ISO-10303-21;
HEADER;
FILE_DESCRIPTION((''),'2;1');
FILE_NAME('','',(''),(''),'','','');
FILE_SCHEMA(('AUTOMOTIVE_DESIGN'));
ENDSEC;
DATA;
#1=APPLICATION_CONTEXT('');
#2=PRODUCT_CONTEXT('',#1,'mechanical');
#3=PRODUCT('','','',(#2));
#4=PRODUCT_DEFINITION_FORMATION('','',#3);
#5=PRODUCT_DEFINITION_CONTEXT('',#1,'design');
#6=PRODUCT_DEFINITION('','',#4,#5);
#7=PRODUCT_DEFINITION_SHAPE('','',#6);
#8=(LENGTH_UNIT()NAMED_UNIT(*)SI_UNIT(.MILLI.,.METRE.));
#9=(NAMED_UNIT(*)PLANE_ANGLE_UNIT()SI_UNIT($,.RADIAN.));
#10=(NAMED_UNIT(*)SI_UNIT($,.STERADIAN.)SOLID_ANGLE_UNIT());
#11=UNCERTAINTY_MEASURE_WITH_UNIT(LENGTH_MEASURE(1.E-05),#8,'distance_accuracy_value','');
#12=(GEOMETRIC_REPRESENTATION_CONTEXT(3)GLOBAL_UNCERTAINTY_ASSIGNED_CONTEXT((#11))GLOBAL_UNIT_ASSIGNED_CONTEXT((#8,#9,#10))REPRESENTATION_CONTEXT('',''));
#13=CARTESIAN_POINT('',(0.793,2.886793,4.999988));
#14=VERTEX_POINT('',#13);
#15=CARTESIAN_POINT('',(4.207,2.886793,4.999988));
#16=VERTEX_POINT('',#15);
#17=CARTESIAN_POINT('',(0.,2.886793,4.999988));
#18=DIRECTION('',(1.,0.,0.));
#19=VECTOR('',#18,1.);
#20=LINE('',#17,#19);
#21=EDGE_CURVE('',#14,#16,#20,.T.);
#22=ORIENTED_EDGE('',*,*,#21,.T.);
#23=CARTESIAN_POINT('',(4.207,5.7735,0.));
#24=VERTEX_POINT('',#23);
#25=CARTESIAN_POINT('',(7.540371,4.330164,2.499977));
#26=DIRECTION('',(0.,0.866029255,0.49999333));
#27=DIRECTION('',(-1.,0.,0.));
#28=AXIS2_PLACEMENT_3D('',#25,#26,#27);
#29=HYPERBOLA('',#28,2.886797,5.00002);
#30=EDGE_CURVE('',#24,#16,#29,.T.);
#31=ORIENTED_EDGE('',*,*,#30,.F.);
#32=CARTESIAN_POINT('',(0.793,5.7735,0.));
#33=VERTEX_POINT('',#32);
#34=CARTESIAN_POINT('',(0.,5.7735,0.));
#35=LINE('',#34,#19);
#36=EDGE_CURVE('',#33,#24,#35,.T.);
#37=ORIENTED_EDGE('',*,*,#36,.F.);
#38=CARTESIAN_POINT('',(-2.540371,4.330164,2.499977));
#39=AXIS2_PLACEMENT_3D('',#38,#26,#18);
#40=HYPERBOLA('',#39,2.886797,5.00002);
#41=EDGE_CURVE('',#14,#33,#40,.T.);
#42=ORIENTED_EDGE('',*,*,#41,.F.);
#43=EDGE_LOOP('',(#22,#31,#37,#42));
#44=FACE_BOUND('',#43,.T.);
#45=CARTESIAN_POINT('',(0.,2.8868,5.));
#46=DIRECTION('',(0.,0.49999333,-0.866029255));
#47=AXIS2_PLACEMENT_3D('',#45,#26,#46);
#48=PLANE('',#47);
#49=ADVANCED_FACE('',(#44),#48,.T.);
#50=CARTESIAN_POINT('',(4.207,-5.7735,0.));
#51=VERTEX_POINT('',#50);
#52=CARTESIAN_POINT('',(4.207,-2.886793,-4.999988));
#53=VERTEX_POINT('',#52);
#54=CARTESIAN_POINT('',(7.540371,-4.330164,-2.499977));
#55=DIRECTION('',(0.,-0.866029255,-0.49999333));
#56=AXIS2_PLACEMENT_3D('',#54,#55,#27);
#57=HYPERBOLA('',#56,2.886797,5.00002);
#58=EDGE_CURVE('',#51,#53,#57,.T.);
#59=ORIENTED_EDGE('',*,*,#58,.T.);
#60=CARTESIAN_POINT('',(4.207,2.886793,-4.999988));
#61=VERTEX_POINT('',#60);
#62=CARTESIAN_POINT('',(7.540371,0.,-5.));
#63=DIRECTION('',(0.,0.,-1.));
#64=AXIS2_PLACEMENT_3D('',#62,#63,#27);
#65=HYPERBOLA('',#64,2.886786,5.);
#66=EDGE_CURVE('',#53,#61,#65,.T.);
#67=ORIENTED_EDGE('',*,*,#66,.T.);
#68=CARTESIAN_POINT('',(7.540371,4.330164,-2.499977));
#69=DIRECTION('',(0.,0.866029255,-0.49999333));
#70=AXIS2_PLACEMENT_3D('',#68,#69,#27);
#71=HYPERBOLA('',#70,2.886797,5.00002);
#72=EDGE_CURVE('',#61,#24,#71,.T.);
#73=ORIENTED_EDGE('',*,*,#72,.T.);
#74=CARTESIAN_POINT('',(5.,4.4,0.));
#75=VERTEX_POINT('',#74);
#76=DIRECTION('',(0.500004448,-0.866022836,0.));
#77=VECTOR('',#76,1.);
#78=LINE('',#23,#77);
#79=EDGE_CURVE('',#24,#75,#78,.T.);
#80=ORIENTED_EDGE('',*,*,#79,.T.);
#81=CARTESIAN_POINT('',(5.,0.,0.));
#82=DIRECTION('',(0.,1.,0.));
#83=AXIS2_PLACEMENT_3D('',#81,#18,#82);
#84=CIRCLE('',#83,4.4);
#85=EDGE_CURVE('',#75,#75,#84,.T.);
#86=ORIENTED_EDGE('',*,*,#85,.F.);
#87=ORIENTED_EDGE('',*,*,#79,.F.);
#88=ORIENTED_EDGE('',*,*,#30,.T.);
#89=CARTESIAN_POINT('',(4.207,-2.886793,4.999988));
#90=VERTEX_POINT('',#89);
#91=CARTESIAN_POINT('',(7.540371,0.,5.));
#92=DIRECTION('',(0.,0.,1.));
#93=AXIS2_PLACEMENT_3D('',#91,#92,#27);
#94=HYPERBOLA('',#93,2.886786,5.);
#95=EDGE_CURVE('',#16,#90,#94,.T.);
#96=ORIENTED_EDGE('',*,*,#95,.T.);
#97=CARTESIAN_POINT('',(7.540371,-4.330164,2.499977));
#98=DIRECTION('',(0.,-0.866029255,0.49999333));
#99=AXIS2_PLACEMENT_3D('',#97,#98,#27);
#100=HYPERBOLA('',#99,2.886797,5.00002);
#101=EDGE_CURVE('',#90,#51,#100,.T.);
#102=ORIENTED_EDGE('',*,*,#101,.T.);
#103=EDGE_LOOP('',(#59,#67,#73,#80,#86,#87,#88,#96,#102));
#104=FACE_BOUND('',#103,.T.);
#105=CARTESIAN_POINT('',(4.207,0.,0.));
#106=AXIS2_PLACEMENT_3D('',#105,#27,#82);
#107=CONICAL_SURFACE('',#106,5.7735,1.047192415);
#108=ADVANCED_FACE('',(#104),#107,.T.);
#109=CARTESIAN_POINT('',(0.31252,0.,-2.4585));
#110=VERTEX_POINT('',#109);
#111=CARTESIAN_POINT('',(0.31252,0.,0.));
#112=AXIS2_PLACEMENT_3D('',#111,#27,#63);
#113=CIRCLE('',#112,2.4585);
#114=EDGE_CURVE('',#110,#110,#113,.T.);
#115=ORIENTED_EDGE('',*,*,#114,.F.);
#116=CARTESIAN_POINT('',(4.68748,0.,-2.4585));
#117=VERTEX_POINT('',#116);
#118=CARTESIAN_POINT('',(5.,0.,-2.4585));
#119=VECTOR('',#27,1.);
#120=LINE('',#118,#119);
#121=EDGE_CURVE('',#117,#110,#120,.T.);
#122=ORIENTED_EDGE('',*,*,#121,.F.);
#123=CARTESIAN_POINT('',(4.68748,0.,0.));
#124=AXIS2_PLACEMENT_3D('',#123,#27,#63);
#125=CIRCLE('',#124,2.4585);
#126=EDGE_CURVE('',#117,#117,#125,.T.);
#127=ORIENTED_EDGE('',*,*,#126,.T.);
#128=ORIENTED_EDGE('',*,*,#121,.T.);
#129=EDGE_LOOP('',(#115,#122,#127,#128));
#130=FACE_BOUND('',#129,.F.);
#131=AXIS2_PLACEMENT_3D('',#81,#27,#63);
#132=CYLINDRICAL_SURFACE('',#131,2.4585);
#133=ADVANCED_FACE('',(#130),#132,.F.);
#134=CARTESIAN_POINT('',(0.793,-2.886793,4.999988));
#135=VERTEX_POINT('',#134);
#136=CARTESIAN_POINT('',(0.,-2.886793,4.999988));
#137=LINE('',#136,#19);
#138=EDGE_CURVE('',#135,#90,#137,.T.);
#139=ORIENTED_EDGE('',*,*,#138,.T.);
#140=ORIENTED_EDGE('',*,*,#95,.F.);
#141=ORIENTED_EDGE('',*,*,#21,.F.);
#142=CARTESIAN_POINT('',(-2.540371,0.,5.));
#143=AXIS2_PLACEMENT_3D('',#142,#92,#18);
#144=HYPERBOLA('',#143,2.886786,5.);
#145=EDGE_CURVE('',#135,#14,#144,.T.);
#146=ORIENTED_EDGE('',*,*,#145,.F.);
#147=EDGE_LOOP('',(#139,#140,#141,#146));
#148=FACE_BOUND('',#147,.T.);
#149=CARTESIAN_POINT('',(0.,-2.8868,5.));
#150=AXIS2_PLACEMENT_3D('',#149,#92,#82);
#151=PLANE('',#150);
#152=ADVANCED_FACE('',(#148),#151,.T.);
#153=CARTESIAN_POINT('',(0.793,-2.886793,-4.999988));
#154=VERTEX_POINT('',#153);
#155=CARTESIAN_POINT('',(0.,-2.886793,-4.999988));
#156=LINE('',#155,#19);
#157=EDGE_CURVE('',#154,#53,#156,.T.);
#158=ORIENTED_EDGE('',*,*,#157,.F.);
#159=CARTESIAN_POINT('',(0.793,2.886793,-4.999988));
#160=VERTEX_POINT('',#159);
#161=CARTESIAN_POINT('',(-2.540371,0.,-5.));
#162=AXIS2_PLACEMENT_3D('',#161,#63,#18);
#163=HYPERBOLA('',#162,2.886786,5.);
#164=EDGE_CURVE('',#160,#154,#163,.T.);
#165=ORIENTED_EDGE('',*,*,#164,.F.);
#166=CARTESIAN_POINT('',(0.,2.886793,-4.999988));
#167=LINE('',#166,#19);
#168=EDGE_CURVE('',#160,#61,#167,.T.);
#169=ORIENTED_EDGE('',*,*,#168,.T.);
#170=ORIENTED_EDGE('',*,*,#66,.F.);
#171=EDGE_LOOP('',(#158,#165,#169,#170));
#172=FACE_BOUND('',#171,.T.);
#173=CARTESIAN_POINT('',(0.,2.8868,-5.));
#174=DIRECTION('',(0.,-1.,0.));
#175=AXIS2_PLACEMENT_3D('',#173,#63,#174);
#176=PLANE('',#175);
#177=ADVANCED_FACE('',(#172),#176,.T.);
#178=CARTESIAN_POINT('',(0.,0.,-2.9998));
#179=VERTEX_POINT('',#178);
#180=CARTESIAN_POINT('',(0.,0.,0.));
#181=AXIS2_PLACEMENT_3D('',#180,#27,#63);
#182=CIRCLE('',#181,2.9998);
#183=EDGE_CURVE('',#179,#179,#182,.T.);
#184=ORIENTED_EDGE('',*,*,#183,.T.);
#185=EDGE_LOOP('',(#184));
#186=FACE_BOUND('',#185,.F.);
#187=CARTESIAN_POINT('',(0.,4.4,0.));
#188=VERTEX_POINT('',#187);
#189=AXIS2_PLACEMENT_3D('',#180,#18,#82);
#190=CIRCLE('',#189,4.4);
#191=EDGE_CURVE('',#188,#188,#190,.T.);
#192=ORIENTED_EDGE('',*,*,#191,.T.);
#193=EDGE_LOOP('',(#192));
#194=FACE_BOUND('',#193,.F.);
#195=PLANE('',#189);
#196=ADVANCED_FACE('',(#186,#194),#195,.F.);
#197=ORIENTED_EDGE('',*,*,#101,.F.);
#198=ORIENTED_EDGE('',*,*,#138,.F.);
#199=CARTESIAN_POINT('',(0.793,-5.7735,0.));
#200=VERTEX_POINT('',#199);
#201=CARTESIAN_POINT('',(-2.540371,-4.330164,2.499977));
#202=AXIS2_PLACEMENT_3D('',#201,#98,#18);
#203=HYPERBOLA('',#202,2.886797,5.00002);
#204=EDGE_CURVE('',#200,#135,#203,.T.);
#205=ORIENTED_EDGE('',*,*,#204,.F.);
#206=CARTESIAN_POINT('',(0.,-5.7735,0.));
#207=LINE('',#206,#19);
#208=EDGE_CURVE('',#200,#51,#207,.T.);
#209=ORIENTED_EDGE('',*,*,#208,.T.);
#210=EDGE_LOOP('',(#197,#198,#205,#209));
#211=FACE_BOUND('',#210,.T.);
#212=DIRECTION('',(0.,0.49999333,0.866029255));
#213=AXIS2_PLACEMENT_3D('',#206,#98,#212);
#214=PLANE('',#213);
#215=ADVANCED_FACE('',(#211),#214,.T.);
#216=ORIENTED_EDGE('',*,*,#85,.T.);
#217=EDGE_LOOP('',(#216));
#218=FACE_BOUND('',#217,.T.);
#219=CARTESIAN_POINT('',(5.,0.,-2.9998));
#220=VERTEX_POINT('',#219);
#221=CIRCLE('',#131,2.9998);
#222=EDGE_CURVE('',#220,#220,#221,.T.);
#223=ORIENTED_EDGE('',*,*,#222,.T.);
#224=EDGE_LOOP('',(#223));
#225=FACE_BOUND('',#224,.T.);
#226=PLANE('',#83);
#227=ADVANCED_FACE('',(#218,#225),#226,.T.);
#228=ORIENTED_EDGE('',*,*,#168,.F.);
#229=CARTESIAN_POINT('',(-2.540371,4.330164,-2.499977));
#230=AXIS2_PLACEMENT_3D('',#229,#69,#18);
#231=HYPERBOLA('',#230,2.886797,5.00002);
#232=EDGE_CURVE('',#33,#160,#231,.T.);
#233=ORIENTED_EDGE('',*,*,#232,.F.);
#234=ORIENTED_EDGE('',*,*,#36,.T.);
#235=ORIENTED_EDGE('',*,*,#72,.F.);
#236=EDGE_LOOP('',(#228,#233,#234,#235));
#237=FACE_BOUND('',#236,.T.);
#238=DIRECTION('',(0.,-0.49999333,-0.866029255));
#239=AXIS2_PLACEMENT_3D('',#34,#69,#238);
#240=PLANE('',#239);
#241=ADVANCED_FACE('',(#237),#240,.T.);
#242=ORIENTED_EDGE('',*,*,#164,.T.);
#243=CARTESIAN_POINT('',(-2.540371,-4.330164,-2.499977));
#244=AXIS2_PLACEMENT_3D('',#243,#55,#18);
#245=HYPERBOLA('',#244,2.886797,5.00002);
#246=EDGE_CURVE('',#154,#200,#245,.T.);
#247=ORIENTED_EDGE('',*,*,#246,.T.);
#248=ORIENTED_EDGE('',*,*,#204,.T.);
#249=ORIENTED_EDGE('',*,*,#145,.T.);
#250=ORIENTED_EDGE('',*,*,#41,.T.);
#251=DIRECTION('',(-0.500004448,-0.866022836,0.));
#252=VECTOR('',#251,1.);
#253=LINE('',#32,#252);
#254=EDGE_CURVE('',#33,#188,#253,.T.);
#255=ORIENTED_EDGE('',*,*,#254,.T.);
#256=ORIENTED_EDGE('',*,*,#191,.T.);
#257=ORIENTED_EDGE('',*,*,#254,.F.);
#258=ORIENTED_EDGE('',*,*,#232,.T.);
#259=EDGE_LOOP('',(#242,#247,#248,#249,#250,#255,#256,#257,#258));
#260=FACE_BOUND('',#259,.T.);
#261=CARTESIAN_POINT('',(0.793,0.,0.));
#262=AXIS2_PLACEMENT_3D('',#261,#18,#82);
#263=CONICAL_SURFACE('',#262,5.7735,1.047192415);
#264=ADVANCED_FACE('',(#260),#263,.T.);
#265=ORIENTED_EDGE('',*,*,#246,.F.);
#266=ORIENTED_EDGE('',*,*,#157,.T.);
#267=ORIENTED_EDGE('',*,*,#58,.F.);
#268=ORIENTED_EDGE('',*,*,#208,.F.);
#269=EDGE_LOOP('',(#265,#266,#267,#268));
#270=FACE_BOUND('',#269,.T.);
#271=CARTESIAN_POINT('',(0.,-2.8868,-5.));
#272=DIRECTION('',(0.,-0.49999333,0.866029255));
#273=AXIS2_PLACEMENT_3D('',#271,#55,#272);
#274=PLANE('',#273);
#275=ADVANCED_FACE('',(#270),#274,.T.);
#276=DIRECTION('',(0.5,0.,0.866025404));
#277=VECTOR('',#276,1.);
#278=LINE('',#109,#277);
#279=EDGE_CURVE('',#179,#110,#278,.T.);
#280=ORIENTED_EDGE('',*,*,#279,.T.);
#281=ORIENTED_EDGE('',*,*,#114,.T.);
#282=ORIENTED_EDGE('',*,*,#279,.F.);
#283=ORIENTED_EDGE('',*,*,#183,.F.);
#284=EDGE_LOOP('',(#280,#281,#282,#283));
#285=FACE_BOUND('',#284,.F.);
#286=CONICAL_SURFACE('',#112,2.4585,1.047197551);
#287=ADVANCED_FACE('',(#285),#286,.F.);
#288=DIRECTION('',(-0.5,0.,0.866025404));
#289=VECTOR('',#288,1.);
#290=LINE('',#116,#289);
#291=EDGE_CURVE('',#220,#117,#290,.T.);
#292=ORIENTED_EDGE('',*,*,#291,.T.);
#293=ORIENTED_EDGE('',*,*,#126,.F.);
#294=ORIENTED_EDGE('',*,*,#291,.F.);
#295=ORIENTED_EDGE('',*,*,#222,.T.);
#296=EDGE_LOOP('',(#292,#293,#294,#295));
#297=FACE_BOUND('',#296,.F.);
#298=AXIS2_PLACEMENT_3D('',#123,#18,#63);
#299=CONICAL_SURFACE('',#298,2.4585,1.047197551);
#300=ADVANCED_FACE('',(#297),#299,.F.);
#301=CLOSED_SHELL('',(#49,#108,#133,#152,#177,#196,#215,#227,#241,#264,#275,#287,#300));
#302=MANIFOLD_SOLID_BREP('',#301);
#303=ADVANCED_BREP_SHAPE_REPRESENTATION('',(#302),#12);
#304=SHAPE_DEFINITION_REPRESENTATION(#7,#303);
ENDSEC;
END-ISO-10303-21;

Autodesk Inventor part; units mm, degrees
ref_plane "YZ Plane" through (0, 0, 0) normal (1, 0, 0) x (0, 1, 0)
ref_plane "XZ Plane" through (0, 0, 0) normal (0, 1, 0) x (-1, 0, 0)
sketch "Sketch1" plane through (0, 0, 0) normal (1, 0, 0) x (0, 1, 0)
  line L0 (-5.7735, 0) -> (-2.8868, 5)
  line L1 (-2.8868, 5) -> (2.8868, 5)
  line L2 (2.8868, 5) -> (5.7735, 0)
  line L3 (5.7735, 0) -> (2.8868, -5)
  line L4 (2.8868, -5) -> (-2.8868, -5)
  line L5 (-2.8868, -5) -> (-5.7735, 0)
  point P0 (0, 0)
  point P1 (0, 0)
  dimension "d0" = 11.547
extrude "Body" add sketch "Sketch1" along normal blind 5
sketch "Sketch2" plane through (0, 0, 0) normal (0, 0, 1) x (1, 0, 0)
  line L0 (0, 2.8868) -> (0, 5.7735) projected
  line L1 (0, 5.7735) -> (5, 5.7735) projected
  line L2 (5, 2.8868) -> (5, 5.7735) projected
  line L3 (-1, 0) -> (6, 0) projected
  line L4 (0.793, 5.7735) -> (0, 4.4)
  line L5 (4.207, 5.7735) -> (5, 4.4)
  dimension "d3" = 30
  dimension "d4" = 30
  dimension "d5" = 8.8
  dimension "d6" = 8.8
revolve "Chamfer1" cut sketch "Sketch2" angle 360 about axis through (-10, 0, 0) along (1, 0, 0)
sketch "Sketch3" plane through (5, 0, 0) normal (1, 0, 0) x (0, 0, -1)
  arc A0 (-0.625, -1.0825) -> (0.625, -1.0825) centre (0, 0) ccw projected
hole "Thread" at (5, 0, 0) direction (-1, 0, 0) diameter 4.917 end through all thread size "M6x1" class "6H" standard "ISO Metric profile"
chamfer "Chamfer2" distance 0.5413 angle 30 1 edges at (5, 0, 2.4585) measured on face at (5, 3.7042, -0.4498)
chamfer "Chamfer3" distance 0.5413 angle 30 1 edges at (0, 0, 2.4585) measured on face at (0, 3.7042, -0.4498)
ref_plane "Work Plane1" through (-11.098, 0, 0) normal (0, -0.8660254, -0.5) x (1, 0, 0)
equation "\"d0\" = 1.1547 * SW"
equation "\"d1\" = KOH"
equation "\"d3\" = ANG1"
equation "\"d4\" = ANG2"
equation "\"d5\" = SW0"
equation "\"d6\" = SW01"
equation "\"d8\" = -0.5 * GD1 + 0.5 * NND"
equation "\"d40\" = -0.5 * GD1 + 0.5 * NND"
equation "\"d10\" = -0.5 * GD1 + 0.5 * NND"
equation "\"d41\" = -0.5 * GD1 + 0.5 * NND"
equation "\"ANG1\" = 30deg"
equation "\"ANG2\" = 30deg"
equation "\"NND\" = 6"
equation "\"KOH\" = 5"
equation "\"SW0\" = SW01"
equation "\"SW01\" = 8.8"
equation "\"GUL\" = 0.541266 * PTC"
equation "\"THREADDIA\" = 6"
equation "\"TOA\" = 30deg"
equation "\"PTC\" = 1"
equation "\"E0\" = 1.155 * SW"
equation "\"GAL\" = 0.541266 * PTC"
equation "\"SW\" = 10"
equation "\"GD1\" = 4.917468"
properties part number "DIN 934 - M6" material "Steel, Mild"
